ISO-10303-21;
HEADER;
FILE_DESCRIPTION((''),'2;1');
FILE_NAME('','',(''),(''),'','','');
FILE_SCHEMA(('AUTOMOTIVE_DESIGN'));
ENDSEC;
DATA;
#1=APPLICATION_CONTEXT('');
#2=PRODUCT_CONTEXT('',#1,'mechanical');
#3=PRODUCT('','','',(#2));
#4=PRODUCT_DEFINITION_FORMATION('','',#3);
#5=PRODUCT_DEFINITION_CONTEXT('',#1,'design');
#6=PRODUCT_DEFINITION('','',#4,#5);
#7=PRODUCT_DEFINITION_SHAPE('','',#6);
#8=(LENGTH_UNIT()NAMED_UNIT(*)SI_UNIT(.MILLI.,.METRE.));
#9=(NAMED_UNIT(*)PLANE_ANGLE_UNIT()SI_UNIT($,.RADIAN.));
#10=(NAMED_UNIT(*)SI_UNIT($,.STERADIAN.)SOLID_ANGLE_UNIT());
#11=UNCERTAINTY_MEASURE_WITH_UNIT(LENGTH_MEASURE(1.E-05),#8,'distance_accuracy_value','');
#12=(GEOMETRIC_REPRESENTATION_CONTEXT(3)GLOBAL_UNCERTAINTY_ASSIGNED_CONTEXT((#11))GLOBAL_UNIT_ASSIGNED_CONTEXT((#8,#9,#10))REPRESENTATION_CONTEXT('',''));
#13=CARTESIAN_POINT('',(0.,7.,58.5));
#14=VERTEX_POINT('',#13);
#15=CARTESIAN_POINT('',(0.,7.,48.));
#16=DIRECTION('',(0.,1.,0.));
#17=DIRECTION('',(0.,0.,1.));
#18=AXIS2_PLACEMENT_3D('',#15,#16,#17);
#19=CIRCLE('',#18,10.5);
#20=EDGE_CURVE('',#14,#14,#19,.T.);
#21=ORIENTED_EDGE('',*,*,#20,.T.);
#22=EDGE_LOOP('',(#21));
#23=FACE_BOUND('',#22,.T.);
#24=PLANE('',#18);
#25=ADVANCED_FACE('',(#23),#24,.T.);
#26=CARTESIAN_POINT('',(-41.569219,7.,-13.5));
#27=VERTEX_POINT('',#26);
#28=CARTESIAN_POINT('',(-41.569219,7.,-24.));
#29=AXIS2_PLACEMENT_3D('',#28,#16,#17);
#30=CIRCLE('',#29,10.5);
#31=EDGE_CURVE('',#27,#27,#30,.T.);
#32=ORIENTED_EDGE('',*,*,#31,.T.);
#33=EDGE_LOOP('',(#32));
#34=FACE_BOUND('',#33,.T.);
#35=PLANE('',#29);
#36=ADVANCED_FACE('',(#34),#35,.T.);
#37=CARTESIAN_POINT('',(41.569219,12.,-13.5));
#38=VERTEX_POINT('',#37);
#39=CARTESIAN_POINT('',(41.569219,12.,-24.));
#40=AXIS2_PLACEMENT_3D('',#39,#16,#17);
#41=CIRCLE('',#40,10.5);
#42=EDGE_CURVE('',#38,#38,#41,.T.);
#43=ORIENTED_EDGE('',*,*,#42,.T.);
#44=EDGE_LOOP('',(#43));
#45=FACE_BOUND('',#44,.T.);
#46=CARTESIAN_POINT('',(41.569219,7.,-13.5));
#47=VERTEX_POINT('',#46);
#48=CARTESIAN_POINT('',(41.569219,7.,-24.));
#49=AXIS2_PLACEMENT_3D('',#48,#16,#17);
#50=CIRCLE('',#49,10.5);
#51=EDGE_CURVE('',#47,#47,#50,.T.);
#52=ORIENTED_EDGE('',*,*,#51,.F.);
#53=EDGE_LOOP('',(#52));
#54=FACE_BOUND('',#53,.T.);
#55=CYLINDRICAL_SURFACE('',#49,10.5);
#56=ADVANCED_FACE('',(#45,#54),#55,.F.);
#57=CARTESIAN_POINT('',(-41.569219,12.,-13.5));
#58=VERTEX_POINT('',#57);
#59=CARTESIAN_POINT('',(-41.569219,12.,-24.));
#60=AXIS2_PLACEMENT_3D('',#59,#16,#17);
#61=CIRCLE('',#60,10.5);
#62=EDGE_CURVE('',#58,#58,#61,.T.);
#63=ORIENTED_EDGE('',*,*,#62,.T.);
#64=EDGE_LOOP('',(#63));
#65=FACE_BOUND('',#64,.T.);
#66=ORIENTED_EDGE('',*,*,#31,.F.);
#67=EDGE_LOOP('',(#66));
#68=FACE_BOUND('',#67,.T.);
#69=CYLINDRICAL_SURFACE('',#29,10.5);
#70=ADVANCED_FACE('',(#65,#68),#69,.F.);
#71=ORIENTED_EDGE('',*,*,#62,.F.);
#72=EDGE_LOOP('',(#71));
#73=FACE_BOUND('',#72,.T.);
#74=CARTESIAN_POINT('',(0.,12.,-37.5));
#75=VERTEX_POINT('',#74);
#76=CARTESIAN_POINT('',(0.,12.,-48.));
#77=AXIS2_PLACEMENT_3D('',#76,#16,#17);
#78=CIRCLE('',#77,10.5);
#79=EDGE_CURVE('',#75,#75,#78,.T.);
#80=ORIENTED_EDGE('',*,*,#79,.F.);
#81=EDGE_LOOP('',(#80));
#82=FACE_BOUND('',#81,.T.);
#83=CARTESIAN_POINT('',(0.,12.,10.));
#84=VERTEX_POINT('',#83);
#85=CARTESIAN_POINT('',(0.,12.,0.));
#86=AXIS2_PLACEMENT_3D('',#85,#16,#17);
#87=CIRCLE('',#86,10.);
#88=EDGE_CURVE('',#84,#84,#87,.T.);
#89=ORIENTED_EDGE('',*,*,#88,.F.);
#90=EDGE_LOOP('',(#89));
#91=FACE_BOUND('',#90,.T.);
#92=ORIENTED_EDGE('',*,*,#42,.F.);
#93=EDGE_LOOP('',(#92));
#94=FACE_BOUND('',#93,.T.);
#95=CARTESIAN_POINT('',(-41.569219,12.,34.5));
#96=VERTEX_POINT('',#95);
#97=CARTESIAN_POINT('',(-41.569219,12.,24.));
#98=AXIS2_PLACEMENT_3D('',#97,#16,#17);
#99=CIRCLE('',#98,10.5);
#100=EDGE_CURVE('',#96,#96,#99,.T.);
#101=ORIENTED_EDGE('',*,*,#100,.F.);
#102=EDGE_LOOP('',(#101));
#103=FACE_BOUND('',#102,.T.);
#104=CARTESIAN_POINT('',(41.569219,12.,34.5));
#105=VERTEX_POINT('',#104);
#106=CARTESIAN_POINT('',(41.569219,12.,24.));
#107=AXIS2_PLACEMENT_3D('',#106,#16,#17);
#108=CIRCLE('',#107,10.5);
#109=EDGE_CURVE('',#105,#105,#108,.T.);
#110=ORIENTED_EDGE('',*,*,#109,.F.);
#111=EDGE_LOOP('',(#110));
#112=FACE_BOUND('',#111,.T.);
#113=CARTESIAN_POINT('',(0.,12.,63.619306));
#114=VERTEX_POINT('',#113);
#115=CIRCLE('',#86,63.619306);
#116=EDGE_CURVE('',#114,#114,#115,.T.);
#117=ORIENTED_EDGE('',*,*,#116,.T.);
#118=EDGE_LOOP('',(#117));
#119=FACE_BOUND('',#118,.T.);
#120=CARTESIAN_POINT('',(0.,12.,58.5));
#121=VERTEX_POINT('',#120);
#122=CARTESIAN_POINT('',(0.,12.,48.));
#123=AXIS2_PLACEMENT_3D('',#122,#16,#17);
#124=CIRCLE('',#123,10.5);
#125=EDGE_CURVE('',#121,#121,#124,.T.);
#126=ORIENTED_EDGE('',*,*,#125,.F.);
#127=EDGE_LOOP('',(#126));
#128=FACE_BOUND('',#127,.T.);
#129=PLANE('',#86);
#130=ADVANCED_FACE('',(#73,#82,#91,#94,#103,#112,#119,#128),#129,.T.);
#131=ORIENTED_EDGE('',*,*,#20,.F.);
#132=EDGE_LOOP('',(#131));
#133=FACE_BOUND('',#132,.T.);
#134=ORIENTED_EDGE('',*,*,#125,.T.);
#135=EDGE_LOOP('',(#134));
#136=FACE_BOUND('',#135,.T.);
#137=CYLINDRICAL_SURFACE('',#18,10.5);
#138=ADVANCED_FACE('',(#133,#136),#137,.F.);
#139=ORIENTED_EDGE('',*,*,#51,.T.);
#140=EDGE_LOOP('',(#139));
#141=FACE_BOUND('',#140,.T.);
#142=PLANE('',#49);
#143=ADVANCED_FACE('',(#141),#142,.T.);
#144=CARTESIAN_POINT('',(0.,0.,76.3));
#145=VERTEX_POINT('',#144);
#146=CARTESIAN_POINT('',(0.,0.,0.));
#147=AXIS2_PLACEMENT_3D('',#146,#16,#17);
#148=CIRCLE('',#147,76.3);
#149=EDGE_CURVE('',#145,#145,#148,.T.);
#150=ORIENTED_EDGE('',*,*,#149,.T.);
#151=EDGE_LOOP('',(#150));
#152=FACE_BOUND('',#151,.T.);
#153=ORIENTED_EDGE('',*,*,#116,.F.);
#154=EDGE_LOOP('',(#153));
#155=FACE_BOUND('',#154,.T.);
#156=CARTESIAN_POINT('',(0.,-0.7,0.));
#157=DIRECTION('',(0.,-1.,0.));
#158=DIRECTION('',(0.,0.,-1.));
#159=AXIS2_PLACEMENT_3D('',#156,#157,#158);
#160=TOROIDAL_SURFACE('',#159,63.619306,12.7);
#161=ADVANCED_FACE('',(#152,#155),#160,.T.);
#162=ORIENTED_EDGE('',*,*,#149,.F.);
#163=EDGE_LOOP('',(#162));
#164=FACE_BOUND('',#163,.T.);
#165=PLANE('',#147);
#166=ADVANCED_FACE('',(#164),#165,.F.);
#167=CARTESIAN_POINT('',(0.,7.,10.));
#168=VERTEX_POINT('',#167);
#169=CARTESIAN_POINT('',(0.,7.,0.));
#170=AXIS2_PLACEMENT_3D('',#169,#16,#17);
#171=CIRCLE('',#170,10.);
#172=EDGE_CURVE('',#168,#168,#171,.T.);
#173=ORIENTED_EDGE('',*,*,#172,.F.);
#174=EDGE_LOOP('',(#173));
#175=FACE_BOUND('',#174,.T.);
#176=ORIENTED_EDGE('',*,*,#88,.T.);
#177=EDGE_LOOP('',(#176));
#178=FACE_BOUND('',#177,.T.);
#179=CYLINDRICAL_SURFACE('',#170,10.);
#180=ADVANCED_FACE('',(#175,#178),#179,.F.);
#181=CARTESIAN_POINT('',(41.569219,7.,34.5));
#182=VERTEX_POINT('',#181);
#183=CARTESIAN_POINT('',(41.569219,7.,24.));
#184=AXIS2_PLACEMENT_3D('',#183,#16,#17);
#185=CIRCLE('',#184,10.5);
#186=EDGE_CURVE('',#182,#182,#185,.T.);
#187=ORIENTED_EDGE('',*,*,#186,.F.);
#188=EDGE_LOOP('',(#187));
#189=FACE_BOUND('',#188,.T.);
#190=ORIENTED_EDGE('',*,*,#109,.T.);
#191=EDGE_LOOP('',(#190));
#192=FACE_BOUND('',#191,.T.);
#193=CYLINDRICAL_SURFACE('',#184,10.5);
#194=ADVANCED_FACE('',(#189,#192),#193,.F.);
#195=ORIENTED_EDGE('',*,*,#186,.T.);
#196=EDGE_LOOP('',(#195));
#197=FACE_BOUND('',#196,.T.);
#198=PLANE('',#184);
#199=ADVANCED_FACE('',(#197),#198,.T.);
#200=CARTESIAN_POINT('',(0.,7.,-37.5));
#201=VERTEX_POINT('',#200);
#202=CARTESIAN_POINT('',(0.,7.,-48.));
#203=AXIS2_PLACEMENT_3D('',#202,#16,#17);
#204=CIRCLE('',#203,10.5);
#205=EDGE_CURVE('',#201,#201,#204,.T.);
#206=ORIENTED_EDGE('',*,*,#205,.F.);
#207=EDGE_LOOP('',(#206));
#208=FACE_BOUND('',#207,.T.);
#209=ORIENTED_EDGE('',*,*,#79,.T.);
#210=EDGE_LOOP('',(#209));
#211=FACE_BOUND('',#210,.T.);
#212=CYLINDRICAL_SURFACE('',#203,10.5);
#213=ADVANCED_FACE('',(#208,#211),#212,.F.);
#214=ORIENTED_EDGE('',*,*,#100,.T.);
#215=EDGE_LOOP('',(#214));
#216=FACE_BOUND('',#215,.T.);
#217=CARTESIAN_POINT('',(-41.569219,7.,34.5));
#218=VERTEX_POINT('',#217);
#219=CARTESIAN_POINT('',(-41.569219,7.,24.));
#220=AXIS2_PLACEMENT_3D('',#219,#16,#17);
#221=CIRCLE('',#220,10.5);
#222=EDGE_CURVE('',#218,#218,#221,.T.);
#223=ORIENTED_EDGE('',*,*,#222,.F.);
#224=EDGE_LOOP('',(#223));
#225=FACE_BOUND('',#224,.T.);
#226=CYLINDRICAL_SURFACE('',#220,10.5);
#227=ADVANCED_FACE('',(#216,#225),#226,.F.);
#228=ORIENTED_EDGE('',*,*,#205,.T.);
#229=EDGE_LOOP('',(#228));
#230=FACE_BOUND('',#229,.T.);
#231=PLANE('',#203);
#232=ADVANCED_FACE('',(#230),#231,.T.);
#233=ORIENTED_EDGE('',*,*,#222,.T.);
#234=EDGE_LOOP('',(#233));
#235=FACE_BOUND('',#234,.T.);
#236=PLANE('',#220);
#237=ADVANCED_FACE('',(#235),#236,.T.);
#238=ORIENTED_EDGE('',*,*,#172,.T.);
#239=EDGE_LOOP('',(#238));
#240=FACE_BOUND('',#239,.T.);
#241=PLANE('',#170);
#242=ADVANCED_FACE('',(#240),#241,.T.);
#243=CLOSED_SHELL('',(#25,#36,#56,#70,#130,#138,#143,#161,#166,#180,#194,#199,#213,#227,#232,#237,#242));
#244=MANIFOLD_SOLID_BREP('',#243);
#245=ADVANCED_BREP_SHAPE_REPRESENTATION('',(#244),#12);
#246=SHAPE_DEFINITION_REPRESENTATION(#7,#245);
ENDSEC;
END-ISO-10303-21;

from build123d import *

# Parameters (mm, degrees)
ESQUISSE1_R             = 76.3
BOSS_EXTRU_1_DEPTH      = 12
CONG_1_R                = 12.7
ESQUISSE2_R             = 10
ESQUISSE2_R_2           = 10.5
ENL_V_MAT_EXTRU_1_DEPTH = 5


with BuildPart() as part:
    # Esquisse1 → Boss.-Extru.1 (new body)
    with BuildSketch(Plane(origin=(0, 0, 0), x_dir=(1, 0, 0), z_dir=(0, 1, 0))):
        with Locations(Location((0, 0, 0), (0, 0, 270))):
            Circle(ESQUISSE1_R)
    extrude(amount=BOSS_EXTRU_1_DEPTH)

    # Congé1
    # the kernel refuses this fillet: 12.7 mm, written as the material it takes off along each edge
    with BuildSketch(Plane(origin=(0, 12, 0), x_dir=(0, 0, 1), z_dir=(-1, 0, 0))) as cong_1_piece_1:
        with BuildLine():
            CenterArc((63.619306013, -12.7), CONG_1_R, 3.159636303, 86.840363697)
            Line((63.619306013, 0), (63.619306013, 0.254))
            Line((63.619306013, 0.254), (76.3, 0.254))
            Line((76.3, 0.254), (76.554, 0))
            ThreePointArc((76.554, 0), (76.554, -6), (76.55361388, -11.986))
            Line((76.55361388, -11.986), (76.3, -12))
        make_face()
    revolve(axis=Axis((0, 12, 0), (0, 1, 0)), mode=Mode.SUBTRACT)

    # Esquisse2 → Enlèv. mat.-Extru.1 (cut)
    with BuildSketch(Plane(origin=(0, 12, 0), x_dir=(1, 0, 0), z_dir=(0, 1, 0))):
        with Locations(Location((0, 0, 0), (0, 0, 270))):
            Circle(ESQUISSE2_R)
        with Locations(Location((0, 48, 0), (0, 0, 270))):
            Circle(ESQUISSE2_R_2)
        with Locations(Location((41.569219382, 24, 0), (0, 0, 270))):
            Circle(ESQUISSE2_R_2)
        with Locations(Location((41.569219382, -24, 0), (0, 0, 270))):
            Circle(ESQUISSE2_R_2)
        with Locations(Location((0, -48, 0), (0, 0, 270))):
            Circle(ESQUISSE2_R_2)
        with Locations(Location((-41.569219382, -24, 0), (0, 0, 270))):
            Circle(ESQUISSE2_R_2)
        with Locations(Location((-41.569219382, 24, 0), (0, 0, 270))):
            Circle(ESQUISSE2_R_2)
    extrude(amount=-ENL_V_MAT_EXTRU_1_DEPTH, mode=Mode.SUBTRACT)


solid = part.part
